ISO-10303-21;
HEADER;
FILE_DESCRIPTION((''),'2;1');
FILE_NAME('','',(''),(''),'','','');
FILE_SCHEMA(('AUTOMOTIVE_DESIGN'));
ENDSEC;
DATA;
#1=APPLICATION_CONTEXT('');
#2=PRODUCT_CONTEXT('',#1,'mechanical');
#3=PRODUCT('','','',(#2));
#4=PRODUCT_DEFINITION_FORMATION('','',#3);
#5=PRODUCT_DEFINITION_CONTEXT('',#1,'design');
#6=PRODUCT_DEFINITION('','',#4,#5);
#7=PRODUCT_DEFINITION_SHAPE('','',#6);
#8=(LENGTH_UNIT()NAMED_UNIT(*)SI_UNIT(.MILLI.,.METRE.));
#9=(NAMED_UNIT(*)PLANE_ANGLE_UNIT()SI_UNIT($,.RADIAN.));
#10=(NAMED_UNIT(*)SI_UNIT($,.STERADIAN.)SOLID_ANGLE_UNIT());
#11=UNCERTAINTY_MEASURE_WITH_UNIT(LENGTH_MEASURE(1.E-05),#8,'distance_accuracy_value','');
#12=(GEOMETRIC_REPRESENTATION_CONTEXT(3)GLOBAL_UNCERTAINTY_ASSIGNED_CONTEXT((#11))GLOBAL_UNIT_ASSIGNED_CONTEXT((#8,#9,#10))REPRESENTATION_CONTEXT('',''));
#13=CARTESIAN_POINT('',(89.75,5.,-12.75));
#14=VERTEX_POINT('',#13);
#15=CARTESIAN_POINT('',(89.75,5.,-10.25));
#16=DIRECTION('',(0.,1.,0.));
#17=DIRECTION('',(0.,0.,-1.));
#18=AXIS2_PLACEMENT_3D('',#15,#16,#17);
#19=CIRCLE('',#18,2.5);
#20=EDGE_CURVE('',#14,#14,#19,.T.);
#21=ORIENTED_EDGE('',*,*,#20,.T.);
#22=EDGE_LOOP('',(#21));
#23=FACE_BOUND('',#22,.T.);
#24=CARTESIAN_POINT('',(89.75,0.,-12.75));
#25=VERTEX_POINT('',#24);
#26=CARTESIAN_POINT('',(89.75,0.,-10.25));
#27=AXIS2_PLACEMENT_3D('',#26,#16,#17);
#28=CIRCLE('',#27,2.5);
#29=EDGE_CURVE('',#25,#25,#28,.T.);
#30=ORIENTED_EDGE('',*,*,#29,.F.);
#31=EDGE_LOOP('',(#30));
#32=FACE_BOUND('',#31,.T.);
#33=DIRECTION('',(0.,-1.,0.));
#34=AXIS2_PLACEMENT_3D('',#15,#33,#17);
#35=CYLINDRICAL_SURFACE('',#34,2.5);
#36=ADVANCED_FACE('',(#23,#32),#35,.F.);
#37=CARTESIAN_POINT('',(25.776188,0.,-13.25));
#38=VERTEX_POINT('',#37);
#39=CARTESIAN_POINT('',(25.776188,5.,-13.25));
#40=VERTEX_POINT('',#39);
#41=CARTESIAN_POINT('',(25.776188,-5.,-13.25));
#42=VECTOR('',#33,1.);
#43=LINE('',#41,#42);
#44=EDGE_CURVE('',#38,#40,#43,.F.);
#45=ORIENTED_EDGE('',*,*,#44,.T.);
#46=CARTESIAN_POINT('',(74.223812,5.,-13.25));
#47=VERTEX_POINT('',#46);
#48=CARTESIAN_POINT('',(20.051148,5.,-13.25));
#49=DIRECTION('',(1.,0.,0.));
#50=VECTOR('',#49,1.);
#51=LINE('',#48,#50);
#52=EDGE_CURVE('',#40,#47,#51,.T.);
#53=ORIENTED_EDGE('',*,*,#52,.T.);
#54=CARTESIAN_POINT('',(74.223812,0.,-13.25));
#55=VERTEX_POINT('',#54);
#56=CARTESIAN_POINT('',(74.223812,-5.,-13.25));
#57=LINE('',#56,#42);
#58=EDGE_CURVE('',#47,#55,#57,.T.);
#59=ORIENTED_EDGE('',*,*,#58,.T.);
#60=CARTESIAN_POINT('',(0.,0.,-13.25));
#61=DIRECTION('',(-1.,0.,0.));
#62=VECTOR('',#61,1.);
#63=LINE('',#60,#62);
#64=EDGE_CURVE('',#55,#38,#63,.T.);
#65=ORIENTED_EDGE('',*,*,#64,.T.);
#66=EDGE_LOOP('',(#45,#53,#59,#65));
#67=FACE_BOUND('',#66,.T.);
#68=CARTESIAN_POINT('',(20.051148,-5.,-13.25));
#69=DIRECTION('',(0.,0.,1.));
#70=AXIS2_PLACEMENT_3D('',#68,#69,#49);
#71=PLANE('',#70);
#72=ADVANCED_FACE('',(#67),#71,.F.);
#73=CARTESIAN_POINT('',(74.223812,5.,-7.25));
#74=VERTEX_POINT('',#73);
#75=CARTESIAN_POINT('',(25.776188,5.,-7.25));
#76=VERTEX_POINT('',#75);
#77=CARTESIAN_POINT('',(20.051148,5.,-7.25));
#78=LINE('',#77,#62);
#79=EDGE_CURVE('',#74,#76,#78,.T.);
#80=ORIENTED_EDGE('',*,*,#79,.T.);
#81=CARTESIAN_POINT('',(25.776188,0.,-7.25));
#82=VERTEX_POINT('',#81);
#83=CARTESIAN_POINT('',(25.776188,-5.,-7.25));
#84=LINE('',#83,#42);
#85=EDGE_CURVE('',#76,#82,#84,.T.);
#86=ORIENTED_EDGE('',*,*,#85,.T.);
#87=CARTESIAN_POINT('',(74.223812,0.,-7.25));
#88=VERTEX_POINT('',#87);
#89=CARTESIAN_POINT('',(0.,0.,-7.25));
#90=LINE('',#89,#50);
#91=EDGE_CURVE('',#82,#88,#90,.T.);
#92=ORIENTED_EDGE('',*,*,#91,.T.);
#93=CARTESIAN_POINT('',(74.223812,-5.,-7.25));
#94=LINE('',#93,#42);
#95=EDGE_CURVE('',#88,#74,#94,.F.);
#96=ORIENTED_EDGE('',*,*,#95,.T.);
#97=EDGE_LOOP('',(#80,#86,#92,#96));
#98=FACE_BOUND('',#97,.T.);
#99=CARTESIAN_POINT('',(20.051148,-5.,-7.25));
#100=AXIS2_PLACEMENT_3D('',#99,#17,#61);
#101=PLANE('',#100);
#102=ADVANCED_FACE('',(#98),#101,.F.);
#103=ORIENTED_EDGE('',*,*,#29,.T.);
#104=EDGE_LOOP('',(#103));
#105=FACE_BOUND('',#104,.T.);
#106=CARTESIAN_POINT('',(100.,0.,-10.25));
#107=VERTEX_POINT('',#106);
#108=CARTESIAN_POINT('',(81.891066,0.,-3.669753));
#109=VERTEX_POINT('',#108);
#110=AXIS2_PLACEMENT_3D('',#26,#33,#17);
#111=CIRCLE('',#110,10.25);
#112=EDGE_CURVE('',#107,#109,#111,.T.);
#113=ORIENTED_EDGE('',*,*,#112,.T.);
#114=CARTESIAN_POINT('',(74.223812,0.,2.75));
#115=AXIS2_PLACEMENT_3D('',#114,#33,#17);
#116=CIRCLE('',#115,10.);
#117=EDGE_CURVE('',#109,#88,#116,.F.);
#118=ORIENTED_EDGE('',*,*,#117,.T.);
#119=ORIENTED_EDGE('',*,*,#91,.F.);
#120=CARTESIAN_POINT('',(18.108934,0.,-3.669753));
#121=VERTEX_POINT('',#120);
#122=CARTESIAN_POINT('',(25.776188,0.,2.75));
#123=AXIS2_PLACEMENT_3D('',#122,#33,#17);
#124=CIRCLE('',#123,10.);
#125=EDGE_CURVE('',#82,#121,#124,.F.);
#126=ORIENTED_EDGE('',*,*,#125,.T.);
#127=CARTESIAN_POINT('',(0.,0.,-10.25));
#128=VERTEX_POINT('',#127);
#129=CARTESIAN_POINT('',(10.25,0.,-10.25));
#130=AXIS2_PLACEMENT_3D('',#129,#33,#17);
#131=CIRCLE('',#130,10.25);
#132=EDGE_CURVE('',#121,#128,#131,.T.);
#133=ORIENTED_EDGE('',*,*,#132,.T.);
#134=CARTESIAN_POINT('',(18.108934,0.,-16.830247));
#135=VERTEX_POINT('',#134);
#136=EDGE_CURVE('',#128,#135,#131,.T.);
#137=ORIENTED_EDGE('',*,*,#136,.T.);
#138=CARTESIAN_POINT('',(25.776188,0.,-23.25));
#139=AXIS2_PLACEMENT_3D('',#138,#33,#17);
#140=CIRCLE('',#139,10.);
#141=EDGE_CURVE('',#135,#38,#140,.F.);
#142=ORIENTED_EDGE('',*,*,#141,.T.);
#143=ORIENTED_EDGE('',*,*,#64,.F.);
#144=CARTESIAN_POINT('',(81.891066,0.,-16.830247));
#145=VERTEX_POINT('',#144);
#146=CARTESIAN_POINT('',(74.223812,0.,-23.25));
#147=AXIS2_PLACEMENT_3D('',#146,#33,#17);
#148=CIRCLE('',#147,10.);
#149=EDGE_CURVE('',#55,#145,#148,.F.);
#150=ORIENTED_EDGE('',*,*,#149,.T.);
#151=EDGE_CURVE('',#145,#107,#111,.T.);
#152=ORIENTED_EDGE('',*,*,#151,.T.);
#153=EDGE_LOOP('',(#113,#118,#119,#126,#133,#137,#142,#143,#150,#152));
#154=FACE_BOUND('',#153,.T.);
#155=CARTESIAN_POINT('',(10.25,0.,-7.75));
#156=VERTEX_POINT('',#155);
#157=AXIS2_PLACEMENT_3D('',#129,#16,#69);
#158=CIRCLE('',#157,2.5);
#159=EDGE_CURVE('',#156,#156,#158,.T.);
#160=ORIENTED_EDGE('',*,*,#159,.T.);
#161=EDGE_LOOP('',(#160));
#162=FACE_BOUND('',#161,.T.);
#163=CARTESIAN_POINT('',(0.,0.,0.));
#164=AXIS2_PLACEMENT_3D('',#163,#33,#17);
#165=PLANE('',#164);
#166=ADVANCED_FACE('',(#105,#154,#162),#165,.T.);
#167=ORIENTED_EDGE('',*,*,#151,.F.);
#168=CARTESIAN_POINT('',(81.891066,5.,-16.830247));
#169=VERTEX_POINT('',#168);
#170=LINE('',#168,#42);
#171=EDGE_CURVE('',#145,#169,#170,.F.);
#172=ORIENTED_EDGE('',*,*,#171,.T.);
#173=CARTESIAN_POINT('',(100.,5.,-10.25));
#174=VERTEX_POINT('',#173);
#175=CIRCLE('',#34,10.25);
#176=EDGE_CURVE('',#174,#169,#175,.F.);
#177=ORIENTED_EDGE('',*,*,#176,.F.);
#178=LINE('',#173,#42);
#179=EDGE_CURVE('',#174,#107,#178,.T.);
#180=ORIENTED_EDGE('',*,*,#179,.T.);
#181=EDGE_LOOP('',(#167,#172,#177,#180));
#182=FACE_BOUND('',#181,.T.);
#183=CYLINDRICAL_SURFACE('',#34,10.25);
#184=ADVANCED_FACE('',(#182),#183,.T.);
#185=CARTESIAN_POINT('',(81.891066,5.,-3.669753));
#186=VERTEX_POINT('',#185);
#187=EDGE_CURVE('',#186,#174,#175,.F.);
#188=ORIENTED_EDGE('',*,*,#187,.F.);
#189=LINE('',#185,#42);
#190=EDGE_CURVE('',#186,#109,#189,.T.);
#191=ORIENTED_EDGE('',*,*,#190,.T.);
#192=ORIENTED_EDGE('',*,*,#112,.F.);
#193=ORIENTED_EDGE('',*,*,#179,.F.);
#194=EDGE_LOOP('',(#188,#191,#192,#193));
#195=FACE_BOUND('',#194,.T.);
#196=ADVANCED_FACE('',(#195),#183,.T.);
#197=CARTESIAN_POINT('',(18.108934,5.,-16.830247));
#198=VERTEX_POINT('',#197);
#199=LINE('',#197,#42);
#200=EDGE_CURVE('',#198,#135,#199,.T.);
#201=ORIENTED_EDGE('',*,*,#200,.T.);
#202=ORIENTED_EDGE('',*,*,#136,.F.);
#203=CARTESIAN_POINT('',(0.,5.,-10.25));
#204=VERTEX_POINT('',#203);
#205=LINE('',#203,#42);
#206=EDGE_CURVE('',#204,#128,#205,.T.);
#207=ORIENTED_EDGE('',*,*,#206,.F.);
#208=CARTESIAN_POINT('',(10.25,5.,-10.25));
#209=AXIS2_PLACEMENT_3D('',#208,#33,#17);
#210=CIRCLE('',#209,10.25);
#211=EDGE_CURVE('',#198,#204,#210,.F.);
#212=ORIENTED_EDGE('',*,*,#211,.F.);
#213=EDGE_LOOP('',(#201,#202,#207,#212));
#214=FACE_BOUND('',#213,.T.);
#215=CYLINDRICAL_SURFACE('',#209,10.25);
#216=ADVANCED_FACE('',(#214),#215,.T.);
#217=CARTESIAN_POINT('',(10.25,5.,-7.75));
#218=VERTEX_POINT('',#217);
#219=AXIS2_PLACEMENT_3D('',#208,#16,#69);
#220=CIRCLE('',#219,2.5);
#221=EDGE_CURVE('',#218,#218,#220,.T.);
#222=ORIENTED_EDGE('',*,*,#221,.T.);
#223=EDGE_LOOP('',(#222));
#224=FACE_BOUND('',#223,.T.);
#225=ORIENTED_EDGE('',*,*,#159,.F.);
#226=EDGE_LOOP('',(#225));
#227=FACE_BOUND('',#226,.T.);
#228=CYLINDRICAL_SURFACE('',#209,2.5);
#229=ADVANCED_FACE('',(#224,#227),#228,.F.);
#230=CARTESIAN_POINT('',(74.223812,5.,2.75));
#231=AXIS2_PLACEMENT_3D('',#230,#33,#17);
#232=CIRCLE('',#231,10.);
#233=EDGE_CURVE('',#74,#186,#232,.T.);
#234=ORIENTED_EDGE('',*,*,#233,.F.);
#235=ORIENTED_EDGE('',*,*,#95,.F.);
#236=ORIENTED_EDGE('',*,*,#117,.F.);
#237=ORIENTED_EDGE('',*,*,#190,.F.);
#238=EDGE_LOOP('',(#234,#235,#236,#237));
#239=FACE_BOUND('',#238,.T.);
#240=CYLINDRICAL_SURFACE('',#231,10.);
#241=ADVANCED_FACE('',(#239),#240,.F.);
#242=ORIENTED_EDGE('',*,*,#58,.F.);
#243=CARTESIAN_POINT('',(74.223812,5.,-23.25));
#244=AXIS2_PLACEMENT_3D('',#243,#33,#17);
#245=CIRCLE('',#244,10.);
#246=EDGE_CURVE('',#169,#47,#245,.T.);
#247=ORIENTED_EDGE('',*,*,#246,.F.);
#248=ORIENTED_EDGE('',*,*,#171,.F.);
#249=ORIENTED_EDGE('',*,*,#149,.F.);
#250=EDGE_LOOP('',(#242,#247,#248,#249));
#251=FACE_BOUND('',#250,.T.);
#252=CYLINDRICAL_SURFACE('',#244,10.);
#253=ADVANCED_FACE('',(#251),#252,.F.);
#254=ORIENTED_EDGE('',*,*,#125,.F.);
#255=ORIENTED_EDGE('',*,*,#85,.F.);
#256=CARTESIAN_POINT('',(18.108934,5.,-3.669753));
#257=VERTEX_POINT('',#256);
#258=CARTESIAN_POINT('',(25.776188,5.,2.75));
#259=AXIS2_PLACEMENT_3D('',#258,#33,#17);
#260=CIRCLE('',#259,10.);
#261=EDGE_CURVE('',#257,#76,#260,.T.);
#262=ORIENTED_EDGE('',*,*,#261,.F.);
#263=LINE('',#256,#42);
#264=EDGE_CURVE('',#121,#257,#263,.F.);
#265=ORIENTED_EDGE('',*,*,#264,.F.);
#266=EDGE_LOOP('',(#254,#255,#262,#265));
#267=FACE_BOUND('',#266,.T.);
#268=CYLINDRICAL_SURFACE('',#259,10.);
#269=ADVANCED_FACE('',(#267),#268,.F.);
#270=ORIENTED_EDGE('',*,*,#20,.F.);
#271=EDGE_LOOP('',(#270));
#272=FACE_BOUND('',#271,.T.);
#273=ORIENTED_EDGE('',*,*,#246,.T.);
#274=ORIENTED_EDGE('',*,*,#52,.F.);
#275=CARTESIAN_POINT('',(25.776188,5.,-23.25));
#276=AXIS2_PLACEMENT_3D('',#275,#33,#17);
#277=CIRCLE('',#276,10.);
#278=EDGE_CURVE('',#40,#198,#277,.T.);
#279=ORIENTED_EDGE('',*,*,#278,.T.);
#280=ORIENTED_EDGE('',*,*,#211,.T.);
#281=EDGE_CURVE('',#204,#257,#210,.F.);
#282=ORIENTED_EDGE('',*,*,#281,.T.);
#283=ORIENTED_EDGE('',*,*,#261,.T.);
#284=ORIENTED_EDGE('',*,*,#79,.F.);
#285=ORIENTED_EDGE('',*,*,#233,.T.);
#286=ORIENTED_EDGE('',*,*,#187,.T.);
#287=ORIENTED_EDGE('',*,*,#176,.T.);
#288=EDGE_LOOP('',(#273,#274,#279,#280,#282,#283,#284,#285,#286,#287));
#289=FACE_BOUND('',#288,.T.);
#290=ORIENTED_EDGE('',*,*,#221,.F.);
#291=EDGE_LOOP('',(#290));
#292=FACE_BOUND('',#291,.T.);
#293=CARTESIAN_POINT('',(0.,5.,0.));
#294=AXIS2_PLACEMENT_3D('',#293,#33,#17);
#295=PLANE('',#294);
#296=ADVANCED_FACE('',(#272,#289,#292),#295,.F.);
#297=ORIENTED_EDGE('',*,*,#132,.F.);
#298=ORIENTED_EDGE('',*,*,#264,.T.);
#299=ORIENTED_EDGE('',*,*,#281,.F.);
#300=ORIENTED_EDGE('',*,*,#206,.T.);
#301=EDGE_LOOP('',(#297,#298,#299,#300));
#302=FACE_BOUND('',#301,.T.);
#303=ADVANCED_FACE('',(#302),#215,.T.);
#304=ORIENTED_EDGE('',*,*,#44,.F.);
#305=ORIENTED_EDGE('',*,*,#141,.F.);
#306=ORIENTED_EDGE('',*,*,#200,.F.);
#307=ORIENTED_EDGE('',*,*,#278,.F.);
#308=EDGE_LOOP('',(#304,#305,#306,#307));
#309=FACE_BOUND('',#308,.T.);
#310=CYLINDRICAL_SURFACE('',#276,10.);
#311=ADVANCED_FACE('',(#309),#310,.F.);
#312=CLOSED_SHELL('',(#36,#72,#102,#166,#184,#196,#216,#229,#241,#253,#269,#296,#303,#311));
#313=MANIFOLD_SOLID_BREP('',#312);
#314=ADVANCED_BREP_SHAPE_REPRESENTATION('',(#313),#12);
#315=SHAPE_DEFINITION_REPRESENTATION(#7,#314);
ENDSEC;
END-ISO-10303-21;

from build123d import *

# Parameters (mm, degrees)
SKETCH1_W           = 100
SKETCH1_H           = 20.5
SKETCH1_R           = 2.5
BOSS_EXTRUDE1_DEPTH = 5
FILLET1_R           = 10.25
CUT_EXTRUDE1_DEPTH  = 10
FILLET2_R           = 10


with BuildPart() as part:
    # Sketch1 → Boss-Extrude1 (new body)
    with BuildSketch(Plane(origin=(0, 0, 0), x_dir=(1, 0, 0), z_dir=(0, 1, 0))):
        with Locations((50, 10.25)):
            Rectangle(SKETCH1_W, SKETCH1_H)
        with Locations(Location((10.25, 10.25, 0), (0, 0, 270))):
            Circle(SKETCH1_R, mode=Mode.SUBTRACT)
        with Locations(Location((89.75, 10.25, 0), (0, 0, 90))):
            Circle(SKETCH1_R, mode=Mode.SUBTRACT)
    extrude(amount=BOSS_EXTRUDE1_DEPTH)

    # Fillet1
    fillet1_edges = [part.edges().sort_by_distance(p)[0] for p in [
        (0, 2.5, 0),
        (0, 2.5, -20.5),
        (100, 2.5, -20.5),
        (100, 2.5, 0),
    ]]
    fillet(fillet1_edges, radius=FILLET1_R - 0.0001)  # a hair under: the kernel refuses the full size

    # Sketch2 → Cut-Extrude1 (cut)
    with BuildSketch(Plane(origin=(0, 5, 0), x_dir=(1, 0, 0), z_dir=(0, 1, 0))):
        with BuildLine():
            Line((20.051147892, 13.25), (79.948852108, 13.25))
            ThreePointArc((79.948852108, 13.25), (83.65440733, 18.490524862), (89.75, 20.5))
            Line((89.75, 20.5), (10.25, 20.5))
            ThreePointArc((10.25, 20.5), (16.34559267, 18.490524862), (20.051147892, 13.25))
        make_face()
        with BuildLine():
            Line((20.051147892, 7.25), (79.948852108, 7.25))
            ThreePointArc((79.948852108, 7.25), (83.65440733, 2.009475138), (89.75, 0))
            Line((89.75, 0), (10.25, 0))
            ThreePointArc((10.25, 0), (16.34559267, 2.009475138), (20.051147892, 7.25))
        make_face()
    extrude(amount=-CUT_EXTRUDE1_DEPTH, mode=Mode.SUBTRACT)

    # Fillet2
    fillet2_edges = [part.edges().sort_by_distance(p)[0] for p in [
        (20.051147892, 2.5, -13.25),
        (79.948852108, 2.5, -13.25),
        (79.948852108, 2.5, -7.25),
        (20.051147892, 2.5, -7.25),
    ]]
    fillet(fillet2_edges, radius=FILLET2_R)


solid = part.part
